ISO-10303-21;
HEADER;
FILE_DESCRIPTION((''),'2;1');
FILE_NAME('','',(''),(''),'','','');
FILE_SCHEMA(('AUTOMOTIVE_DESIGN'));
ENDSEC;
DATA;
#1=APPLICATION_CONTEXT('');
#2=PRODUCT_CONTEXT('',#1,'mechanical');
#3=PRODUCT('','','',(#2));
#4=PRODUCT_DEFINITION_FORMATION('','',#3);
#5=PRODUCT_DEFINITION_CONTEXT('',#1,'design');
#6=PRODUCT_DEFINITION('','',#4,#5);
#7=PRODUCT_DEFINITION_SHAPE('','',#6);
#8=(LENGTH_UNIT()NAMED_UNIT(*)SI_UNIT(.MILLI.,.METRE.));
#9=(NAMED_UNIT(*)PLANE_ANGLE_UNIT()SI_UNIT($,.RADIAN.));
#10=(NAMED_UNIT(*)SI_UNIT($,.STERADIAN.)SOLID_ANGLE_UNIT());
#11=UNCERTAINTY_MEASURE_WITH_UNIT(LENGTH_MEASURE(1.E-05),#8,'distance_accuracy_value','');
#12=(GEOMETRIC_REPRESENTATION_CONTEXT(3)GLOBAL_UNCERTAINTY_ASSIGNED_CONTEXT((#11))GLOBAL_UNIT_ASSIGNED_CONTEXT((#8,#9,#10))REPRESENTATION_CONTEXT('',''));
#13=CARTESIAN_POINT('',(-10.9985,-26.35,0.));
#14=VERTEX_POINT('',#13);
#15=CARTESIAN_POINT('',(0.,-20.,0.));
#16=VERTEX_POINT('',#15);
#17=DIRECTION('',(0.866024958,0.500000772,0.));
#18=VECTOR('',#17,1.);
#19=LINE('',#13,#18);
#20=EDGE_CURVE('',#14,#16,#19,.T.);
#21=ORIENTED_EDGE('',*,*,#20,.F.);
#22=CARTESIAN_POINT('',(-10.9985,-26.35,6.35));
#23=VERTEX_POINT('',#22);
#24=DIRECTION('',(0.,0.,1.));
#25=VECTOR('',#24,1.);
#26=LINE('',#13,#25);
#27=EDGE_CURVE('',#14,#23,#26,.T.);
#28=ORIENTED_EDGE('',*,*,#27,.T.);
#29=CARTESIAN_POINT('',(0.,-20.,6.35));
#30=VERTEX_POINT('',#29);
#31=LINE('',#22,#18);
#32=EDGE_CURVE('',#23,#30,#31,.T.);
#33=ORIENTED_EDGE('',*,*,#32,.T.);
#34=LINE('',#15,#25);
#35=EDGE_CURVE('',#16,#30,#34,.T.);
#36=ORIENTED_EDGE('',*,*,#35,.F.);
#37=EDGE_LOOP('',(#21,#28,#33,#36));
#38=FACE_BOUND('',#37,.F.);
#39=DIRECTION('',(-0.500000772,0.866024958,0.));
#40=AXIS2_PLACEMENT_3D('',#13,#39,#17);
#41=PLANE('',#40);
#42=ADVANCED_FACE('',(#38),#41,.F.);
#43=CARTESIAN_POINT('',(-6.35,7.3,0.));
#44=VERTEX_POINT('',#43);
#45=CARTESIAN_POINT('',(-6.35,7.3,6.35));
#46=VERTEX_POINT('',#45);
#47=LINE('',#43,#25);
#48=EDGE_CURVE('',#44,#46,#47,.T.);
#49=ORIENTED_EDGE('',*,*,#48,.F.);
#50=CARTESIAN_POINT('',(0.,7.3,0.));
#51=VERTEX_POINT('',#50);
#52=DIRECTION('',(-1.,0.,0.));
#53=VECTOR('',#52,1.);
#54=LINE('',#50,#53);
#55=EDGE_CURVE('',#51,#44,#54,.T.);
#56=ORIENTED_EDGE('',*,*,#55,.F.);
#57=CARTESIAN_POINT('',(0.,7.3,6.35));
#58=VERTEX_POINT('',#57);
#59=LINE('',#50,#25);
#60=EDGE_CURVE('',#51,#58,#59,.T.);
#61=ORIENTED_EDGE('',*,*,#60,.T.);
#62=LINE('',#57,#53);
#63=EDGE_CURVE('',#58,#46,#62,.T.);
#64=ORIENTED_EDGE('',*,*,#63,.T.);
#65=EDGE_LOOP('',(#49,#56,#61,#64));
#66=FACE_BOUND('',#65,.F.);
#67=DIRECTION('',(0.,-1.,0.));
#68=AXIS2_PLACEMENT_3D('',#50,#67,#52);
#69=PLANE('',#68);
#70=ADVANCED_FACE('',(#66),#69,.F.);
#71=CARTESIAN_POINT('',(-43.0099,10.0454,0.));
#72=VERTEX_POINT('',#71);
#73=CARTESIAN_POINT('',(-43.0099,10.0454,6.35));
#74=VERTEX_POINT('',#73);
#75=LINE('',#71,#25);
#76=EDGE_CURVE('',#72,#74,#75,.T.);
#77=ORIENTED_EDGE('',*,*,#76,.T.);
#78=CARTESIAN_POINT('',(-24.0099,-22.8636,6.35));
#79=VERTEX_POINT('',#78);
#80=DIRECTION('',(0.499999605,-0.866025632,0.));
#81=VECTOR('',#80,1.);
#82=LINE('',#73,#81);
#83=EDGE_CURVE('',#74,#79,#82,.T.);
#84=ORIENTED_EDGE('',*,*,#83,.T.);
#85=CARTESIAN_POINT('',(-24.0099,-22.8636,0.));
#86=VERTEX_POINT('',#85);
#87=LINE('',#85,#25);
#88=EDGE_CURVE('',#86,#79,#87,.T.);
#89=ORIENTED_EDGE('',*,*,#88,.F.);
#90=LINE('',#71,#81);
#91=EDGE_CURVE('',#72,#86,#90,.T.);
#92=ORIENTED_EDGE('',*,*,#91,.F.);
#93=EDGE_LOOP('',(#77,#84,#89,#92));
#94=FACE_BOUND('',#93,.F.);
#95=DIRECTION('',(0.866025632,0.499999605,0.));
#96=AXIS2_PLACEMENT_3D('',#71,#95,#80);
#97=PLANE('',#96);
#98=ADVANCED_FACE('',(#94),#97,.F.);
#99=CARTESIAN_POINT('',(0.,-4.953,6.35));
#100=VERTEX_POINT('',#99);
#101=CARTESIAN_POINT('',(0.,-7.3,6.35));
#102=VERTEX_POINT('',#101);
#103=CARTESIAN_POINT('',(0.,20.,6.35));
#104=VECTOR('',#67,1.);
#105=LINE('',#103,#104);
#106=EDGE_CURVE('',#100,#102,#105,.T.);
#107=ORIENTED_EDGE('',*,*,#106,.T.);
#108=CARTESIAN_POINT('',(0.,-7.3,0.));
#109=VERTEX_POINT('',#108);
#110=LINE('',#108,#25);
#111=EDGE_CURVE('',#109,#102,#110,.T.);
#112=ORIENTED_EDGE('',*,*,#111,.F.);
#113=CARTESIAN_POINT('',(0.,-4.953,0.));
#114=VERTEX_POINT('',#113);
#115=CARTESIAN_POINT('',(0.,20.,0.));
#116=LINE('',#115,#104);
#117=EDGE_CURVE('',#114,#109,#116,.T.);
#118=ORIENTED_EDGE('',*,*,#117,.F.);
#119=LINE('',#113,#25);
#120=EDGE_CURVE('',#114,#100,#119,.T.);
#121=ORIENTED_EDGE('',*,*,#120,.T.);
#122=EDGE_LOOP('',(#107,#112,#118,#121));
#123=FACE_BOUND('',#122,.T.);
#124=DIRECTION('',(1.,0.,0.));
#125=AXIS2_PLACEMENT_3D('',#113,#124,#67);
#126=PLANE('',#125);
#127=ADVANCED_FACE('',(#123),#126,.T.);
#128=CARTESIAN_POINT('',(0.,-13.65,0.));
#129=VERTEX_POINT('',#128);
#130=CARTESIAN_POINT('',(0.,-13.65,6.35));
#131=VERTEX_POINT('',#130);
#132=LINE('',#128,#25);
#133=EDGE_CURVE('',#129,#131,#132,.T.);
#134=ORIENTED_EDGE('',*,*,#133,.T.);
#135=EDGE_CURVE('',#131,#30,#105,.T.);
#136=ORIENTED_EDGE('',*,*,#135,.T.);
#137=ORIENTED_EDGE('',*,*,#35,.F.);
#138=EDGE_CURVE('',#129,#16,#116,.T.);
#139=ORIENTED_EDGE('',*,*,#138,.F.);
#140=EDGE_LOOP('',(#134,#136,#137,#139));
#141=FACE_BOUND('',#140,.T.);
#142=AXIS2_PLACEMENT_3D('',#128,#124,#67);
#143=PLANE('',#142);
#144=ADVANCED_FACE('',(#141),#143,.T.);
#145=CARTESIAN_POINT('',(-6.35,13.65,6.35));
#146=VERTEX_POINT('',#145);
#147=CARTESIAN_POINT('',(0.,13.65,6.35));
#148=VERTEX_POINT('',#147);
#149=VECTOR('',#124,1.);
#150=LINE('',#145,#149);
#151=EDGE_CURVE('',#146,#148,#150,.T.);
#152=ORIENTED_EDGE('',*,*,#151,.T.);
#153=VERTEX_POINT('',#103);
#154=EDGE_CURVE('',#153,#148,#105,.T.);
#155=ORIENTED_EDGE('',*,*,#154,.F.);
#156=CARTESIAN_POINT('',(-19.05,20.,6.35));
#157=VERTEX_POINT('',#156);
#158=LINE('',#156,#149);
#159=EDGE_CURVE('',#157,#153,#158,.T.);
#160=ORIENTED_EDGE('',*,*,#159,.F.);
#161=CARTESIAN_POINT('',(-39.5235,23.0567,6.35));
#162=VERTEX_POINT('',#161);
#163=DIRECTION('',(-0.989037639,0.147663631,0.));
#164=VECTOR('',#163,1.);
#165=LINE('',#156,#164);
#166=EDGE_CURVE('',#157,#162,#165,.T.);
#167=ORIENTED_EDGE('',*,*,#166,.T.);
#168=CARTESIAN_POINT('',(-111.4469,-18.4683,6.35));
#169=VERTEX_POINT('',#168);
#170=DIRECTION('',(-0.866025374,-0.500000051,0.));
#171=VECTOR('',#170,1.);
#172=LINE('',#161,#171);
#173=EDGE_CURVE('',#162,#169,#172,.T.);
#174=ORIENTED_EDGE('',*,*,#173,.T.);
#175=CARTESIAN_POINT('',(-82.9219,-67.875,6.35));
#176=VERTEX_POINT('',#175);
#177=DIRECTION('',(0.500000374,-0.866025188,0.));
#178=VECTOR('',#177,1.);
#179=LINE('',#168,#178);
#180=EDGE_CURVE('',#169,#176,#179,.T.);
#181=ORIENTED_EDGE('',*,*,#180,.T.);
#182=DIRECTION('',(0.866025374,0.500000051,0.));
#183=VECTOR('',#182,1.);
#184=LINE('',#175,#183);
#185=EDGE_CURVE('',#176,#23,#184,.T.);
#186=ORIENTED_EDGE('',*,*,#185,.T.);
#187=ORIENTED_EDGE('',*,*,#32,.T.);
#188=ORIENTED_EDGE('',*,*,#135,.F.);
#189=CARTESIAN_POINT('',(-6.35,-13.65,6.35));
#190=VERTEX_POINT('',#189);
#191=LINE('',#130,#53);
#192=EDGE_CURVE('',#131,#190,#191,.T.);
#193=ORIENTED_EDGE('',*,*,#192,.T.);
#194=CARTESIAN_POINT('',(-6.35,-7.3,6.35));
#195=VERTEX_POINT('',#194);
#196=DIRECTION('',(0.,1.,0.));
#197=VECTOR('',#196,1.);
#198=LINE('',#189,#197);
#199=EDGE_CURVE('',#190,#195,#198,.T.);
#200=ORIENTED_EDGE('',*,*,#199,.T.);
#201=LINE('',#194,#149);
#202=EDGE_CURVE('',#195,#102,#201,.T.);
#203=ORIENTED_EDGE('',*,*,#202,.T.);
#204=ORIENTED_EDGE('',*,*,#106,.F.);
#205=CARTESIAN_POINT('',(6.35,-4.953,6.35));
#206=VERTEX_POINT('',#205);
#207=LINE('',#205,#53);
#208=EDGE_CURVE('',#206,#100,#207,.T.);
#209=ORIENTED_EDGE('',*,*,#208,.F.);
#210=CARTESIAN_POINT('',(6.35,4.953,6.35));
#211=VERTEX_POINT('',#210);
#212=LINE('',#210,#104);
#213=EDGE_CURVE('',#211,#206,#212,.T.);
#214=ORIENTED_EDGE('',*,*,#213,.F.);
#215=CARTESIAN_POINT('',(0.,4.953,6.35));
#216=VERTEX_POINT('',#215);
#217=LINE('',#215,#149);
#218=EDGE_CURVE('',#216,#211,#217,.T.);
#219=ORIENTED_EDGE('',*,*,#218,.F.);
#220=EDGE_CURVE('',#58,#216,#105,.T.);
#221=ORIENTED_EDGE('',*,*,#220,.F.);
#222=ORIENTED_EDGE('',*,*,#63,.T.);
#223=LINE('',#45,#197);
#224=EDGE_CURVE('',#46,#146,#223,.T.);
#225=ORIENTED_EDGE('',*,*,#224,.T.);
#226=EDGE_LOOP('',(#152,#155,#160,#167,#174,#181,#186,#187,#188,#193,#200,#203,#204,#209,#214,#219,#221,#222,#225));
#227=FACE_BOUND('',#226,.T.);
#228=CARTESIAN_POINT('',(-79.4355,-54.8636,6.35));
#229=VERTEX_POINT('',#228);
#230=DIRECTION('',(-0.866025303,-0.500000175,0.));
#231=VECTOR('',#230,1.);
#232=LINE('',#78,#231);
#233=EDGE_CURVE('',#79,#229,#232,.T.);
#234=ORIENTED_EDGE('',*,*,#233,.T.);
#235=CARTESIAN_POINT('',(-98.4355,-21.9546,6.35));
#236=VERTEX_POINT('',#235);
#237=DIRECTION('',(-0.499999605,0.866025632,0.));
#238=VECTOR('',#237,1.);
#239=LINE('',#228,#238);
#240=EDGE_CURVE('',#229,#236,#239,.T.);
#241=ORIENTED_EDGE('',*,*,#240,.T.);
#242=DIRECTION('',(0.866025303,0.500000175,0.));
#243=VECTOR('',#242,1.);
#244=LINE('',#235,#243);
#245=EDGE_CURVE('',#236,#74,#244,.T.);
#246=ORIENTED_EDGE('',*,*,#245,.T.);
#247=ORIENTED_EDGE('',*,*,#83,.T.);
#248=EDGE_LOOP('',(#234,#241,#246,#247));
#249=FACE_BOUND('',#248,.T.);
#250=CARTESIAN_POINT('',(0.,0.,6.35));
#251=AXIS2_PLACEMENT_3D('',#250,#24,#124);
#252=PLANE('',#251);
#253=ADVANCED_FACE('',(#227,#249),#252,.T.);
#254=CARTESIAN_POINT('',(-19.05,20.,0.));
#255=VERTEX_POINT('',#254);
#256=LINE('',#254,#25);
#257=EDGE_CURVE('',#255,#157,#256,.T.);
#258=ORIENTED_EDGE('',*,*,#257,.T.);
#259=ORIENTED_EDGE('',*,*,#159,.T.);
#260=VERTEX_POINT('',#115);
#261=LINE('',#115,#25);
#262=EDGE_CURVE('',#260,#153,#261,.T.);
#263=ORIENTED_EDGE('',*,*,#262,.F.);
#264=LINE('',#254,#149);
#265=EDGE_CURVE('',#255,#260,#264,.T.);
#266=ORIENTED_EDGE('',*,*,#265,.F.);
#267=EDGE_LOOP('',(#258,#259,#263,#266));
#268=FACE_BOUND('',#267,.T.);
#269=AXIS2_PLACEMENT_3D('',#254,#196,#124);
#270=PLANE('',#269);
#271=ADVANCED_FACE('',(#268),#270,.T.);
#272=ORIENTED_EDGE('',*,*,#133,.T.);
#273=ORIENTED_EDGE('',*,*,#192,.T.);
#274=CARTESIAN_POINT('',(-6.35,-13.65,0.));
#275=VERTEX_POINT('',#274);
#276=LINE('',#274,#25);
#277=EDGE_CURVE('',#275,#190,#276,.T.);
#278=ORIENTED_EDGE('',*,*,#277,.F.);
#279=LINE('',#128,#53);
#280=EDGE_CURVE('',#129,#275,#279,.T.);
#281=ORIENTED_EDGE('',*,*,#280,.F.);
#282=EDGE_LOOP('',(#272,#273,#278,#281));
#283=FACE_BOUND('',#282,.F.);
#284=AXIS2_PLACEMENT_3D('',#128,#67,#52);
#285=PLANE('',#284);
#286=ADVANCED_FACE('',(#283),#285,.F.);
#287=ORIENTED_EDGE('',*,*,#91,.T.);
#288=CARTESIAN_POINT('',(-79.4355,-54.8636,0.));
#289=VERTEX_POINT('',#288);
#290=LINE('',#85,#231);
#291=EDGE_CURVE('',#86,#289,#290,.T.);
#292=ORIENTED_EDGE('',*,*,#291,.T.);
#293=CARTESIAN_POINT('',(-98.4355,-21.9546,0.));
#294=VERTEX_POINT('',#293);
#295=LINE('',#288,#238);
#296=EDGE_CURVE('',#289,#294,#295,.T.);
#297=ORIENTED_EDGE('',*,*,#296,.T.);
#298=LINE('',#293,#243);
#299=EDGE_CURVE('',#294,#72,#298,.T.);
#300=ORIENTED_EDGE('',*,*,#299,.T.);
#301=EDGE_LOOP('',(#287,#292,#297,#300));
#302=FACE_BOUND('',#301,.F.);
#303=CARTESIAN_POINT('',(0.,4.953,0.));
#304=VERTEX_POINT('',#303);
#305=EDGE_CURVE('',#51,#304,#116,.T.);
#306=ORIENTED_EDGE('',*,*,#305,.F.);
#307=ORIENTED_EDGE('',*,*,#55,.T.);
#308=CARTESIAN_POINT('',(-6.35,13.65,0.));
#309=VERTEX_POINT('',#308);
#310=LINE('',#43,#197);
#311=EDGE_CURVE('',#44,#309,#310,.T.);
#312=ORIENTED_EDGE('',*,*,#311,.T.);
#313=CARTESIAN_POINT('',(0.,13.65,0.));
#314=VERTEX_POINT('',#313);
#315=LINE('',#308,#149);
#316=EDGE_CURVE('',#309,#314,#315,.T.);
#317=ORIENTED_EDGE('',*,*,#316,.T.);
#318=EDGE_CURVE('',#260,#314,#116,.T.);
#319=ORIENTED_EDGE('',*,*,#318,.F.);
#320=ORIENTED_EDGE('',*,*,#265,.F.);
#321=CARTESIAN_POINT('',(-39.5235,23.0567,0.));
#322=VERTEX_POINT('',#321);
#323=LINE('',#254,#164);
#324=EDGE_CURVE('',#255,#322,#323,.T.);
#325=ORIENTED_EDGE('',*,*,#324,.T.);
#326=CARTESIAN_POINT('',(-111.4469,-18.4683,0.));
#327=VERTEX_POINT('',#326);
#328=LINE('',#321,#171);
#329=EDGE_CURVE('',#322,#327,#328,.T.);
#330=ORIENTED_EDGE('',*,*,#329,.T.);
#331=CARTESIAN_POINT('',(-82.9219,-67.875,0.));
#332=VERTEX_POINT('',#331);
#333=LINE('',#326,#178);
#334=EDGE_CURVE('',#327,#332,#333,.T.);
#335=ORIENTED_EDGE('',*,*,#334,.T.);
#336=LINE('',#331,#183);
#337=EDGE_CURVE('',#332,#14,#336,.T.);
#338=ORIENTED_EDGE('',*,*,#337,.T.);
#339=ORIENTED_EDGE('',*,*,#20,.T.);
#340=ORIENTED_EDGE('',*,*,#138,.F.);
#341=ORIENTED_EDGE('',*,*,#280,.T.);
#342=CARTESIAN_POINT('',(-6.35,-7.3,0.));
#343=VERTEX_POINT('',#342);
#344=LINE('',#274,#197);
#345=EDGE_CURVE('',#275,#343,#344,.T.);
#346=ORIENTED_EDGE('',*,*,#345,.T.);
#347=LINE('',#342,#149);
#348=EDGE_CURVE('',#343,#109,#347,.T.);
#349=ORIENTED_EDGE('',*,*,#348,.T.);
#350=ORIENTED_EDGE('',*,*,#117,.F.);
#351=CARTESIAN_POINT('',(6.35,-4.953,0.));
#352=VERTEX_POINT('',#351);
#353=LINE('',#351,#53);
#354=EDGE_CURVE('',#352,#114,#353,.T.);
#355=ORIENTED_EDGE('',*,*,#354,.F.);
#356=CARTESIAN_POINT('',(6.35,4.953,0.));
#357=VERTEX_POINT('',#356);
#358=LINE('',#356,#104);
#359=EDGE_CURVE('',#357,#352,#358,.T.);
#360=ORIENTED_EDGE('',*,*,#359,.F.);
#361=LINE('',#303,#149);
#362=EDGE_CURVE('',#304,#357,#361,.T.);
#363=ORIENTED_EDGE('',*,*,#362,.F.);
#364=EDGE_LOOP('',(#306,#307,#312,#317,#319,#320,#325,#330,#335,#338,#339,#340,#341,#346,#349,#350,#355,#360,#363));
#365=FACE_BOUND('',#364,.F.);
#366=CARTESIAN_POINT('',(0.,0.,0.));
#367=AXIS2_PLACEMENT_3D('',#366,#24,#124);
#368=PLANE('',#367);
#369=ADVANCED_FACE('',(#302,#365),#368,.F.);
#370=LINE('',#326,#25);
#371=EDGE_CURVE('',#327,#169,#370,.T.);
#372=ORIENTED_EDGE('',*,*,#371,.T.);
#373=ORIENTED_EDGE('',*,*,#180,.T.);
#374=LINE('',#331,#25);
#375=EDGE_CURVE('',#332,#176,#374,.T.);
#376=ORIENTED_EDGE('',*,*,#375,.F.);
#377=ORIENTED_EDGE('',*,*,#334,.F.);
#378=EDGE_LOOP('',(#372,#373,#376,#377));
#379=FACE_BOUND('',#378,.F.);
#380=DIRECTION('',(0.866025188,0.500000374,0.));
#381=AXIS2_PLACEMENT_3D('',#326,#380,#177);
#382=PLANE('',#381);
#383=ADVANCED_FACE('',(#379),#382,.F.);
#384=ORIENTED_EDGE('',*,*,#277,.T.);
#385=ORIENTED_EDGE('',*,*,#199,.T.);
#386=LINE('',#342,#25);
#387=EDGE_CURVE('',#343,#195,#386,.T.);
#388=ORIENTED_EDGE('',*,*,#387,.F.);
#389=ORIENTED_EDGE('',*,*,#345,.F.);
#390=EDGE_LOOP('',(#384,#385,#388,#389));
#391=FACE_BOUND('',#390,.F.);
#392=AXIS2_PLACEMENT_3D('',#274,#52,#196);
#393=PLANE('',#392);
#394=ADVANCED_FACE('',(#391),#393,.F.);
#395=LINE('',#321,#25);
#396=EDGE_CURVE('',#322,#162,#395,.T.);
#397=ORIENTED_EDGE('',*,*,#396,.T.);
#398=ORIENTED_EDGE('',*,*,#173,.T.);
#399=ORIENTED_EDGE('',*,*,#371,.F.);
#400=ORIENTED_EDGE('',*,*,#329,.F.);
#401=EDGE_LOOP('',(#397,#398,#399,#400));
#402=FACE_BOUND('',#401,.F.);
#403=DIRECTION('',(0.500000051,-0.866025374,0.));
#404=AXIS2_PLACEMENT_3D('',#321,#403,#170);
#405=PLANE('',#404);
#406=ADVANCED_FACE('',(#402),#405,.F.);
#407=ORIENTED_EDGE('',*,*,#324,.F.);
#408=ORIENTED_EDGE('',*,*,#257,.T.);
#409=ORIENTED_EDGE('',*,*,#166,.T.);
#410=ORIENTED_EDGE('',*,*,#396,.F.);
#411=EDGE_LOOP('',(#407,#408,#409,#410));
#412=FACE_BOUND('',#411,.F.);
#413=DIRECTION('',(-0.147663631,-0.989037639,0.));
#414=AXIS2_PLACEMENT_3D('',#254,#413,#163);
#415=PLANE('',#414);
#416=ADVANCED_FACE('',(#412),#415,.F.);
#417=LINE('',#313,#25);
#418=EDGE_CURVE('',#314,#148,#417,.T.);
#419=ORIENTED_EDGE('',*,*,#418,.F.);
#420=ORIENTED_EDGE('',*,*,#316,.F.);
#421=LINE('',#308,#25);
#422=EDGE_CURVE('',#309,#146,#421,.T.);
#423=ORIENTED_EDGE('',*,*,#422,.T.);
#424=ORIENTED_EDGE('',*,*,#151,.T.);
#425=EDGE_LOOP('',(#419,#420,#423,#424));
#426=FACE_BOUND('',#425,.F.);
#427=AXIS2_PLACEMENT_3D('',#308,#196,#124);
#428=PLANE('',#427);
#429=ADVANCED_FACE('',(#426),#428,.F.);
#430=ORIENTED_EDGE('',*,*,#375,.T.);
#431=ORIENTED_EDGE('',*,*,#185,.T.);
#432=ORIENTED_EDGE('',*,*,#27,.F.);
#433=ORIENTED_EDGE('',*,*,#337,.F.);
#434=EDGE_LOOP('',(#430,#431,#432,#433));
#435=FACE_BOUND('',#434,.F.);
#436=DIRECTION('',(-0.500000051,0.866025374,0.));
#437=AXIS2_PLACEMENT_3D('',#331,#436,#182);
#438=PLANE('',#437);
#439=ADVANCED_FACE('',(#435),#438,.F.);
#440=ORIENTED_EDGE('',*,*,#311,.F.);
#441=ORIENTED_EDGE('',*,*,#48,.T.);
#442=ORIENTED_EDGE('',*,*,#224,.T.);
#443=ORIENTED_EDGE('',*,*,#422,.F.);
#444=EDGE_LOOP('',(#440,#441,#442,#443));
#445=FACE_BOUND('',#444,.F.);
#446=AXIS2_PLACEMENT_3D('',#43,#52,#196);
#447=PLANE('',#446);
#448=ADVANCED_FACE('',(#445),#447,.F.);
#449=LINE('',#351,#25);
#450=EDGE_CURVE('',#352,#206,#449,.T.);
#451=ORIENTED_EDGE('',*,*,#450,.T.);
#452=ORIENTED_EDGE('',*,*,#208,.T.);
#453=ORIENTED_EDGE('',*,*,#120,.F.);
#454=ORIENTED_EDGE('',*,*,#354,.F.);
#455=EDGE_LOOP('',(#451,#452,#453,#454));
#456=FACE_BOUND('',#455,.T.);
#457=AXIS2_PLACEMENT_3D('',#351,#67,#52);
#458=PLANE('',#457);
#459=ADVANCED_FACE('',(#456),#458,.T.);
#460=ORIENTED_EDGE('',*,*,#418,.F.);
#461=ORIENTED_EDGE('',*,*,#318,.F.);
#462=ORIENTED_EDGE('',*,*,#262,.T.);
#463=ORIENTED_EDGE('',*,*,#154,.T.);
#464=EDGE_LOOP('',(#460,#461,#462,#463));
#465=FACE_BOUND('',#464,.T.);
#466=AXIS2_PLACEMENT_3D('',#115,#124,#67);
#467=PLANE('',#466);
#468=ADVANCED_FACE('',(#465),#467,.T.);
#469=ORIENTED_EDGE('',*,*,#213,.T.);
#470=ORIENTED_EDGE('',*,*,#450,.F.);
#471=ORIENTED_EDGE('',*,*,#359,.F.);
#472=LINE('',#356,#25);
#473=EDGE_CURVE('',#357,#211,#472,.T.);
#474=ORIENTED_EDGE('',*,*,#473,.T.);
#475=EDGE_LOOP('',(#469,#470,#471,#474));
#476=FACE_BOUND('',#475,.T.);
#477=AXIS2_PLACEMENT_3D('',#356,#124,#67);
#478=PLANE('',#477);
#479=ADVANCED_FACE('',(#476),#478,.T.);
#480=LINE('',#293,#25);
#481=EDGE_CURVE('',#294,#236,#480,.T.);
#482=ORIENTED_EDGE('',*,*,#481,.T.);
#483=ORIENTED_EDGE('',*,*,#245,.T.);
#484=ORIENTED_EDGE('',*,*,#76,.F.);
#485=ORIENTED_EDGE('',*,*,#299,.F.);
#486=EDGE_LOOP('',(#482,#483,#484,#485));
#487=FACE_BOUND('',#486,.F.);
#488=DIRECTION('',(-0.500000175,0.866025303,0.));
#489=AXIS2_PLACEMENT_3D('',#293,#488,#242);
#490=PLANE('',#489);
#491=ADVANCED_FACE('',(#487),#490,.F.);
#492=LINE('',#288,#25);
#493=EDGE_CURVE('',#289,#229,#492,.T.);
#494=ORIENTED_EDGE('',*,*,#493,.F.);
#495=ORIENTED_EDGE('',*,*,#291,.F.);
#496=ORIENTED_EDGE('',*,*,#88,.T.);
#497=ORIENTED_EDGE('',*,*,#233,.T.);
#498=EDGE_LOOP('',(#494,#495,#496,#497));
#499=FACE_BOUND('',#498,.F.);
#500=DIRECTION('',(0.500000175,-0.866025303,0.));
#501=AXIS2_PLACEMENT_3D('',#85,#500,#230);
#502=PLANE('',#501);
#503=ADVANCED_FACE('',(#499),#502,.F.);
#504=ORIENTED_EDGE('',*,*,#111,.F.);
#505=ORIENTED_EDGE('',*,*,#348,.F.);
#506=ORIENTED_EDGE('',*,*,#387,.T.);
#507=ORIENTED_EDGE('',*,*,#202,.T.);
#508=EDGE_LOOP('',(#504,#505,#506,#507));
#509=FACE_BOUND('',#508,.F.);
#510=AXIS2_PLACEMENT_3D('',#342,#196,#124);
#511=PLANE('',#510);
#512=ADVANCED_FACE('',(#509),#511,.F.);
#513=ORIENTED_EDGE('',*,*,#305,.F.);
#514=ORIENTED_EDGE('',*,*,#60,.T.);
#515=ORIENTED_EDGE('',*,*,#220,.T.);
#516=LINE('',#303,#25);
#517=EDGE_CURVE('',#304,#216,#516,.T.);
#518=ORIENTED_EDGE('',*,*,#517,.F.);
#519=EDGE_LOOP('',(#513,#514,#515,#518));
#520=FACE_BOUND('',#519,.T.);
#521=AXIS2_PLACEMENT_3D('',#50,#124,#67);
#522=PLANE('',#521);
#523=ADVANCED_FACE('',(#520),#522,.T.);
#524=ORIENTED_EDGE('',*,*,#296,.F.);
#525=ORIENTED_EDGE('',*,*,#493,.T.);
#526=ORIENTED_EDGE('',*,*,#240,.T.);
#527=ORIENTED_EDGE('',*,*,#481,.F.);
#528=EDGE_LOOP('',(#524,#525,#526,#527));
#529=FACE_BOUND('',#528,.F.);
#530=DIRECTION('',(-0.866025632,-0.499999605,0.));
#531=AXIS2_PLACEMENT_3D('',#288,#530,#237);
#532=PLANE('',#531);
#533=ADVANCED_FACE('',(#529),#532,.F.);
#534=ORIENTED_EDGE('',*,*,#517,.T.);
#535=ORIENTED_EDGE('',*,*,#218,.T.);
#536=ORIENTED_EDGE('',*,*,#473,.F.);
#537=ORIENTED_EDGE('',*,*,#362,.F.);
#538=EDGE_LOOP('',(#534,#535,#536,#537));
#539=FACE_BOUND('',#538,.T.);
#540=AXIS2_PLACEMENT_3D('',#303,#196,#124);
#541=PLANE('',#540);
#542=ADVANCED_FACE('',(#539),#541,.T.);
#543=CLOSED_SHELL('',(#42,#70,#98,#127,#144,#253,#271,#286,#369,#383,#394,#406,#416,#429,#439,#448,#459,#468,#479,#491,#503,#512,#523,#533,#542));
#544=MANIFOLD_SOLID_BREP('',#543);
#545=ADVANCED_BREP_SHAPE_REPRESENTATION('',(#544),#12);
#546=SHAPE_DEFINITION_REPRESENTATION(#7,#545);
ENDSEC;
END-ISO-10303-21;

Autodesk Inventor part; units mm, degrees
ref_plane "YZ Plane" through (0, 0, 0) normal (1, 0, 0) x (0, 1, 0)
ref_plane "XZ Plane" through (0, 0, 0) normal (0, 1, 0) x (-1, 0, 0)
ref_plane "XY Plane" through (0, 0, 0) normal (0, 0, 1) x (1, 0, 0)
sketch "Sketch1" plane through (0, 0, 0) normal (0, 0, 1) x (1, 0, 0)
  line L0 (-98.4355, -21.9546) -> (-43.0099, 10.0454)
  line L1 (-43.0099, 10.0454) -> (-24.0099, -22.8636)
  line L2 (-24.0099, -22.8636) -> (-79.4355, -54.8636)
  line L3 (-79.4355, -54.8636) -> (-98.4355, -21.9546)
  line L4 (-6.35, -7.3) -> (0, -7.3)
  line L5 (0, -7.3) -> (0, -13.65)
  line L6 (0, -13.65) -> (-6.35, -13.65)
  line L7 (-6.35, -13.65) -> (-6.35, -7.3)
  line L8 (6.35, -4.953) -> (0, -4.953)
  line L9 (0, -4.953) -> (0, 4.953)
  line L10 (0, 4.953) -> (6.35, 4.953)
  line L11 (6.35, 4.953) -> (6.35, -4.953)
  line L12 (-6.35, 13.65) -> (0, 13.65)
  line L13 (0, 13.65) -> (0, 7.3)
  line L14 (0, 7.3) -> (-6.35, 7.3)
  line L15 (-6.35, 7.3) -> (-6.35, 13.65)
  line L16 (0, -20) -> (-19.05, -20)
  line L17 (-19.05, -20) -> (-19.05, 20)
  line L18 (-19.05, 20) -> (0, 20)
  line L19 (0, 20) -> (0, -20)
  line L20 (-10.9985, -26.35) -> (-39.5235, 23.0567)
  line L21 (-39.5235, 23.0567) -> (-111.4469, -18.4683)
  line L22 (-111.4469, -18.4683) -> (-82.9219, -67.875)
  line L23 (-82.9219, -67.875) -> (-10.9985, -26.35)
  line L24 (-10.9985, -26.35) -> (0, -20)
  line L25 (-19.05, 20) -> (-39.5235, 23.0567)
  point P0 (0, 0)
  point P1 (0, 0)
  dimension "d0" = 6.35
  dimension "d2" = 9.906
  dimension "d3" = 40
  dimension "d4" = 6.35
  dimension "d5" = 6.35
  dimension "d6" = 6.35
  dimension "d7" = 38
  dimension "d8" = 64
  dimension "d9" = 9.525
  dimension "d10" = 30
  dimension "d11" = 19.05
  dimension "d12" = 12.7
extrude "Extrusion1" add sketch "Sketch1" along normal blind 6.35 contours L7 L6 L19 L16 L20 L17 L18 L12 L15 L14 L9 L4 | L9 L10 L11 L8 | L24 L20 L16 | L20 L23 L22 L21 L17 L16 | L16 L17 L20 | L20 L25 L17
properties part number "acrylic kinect bracket"
